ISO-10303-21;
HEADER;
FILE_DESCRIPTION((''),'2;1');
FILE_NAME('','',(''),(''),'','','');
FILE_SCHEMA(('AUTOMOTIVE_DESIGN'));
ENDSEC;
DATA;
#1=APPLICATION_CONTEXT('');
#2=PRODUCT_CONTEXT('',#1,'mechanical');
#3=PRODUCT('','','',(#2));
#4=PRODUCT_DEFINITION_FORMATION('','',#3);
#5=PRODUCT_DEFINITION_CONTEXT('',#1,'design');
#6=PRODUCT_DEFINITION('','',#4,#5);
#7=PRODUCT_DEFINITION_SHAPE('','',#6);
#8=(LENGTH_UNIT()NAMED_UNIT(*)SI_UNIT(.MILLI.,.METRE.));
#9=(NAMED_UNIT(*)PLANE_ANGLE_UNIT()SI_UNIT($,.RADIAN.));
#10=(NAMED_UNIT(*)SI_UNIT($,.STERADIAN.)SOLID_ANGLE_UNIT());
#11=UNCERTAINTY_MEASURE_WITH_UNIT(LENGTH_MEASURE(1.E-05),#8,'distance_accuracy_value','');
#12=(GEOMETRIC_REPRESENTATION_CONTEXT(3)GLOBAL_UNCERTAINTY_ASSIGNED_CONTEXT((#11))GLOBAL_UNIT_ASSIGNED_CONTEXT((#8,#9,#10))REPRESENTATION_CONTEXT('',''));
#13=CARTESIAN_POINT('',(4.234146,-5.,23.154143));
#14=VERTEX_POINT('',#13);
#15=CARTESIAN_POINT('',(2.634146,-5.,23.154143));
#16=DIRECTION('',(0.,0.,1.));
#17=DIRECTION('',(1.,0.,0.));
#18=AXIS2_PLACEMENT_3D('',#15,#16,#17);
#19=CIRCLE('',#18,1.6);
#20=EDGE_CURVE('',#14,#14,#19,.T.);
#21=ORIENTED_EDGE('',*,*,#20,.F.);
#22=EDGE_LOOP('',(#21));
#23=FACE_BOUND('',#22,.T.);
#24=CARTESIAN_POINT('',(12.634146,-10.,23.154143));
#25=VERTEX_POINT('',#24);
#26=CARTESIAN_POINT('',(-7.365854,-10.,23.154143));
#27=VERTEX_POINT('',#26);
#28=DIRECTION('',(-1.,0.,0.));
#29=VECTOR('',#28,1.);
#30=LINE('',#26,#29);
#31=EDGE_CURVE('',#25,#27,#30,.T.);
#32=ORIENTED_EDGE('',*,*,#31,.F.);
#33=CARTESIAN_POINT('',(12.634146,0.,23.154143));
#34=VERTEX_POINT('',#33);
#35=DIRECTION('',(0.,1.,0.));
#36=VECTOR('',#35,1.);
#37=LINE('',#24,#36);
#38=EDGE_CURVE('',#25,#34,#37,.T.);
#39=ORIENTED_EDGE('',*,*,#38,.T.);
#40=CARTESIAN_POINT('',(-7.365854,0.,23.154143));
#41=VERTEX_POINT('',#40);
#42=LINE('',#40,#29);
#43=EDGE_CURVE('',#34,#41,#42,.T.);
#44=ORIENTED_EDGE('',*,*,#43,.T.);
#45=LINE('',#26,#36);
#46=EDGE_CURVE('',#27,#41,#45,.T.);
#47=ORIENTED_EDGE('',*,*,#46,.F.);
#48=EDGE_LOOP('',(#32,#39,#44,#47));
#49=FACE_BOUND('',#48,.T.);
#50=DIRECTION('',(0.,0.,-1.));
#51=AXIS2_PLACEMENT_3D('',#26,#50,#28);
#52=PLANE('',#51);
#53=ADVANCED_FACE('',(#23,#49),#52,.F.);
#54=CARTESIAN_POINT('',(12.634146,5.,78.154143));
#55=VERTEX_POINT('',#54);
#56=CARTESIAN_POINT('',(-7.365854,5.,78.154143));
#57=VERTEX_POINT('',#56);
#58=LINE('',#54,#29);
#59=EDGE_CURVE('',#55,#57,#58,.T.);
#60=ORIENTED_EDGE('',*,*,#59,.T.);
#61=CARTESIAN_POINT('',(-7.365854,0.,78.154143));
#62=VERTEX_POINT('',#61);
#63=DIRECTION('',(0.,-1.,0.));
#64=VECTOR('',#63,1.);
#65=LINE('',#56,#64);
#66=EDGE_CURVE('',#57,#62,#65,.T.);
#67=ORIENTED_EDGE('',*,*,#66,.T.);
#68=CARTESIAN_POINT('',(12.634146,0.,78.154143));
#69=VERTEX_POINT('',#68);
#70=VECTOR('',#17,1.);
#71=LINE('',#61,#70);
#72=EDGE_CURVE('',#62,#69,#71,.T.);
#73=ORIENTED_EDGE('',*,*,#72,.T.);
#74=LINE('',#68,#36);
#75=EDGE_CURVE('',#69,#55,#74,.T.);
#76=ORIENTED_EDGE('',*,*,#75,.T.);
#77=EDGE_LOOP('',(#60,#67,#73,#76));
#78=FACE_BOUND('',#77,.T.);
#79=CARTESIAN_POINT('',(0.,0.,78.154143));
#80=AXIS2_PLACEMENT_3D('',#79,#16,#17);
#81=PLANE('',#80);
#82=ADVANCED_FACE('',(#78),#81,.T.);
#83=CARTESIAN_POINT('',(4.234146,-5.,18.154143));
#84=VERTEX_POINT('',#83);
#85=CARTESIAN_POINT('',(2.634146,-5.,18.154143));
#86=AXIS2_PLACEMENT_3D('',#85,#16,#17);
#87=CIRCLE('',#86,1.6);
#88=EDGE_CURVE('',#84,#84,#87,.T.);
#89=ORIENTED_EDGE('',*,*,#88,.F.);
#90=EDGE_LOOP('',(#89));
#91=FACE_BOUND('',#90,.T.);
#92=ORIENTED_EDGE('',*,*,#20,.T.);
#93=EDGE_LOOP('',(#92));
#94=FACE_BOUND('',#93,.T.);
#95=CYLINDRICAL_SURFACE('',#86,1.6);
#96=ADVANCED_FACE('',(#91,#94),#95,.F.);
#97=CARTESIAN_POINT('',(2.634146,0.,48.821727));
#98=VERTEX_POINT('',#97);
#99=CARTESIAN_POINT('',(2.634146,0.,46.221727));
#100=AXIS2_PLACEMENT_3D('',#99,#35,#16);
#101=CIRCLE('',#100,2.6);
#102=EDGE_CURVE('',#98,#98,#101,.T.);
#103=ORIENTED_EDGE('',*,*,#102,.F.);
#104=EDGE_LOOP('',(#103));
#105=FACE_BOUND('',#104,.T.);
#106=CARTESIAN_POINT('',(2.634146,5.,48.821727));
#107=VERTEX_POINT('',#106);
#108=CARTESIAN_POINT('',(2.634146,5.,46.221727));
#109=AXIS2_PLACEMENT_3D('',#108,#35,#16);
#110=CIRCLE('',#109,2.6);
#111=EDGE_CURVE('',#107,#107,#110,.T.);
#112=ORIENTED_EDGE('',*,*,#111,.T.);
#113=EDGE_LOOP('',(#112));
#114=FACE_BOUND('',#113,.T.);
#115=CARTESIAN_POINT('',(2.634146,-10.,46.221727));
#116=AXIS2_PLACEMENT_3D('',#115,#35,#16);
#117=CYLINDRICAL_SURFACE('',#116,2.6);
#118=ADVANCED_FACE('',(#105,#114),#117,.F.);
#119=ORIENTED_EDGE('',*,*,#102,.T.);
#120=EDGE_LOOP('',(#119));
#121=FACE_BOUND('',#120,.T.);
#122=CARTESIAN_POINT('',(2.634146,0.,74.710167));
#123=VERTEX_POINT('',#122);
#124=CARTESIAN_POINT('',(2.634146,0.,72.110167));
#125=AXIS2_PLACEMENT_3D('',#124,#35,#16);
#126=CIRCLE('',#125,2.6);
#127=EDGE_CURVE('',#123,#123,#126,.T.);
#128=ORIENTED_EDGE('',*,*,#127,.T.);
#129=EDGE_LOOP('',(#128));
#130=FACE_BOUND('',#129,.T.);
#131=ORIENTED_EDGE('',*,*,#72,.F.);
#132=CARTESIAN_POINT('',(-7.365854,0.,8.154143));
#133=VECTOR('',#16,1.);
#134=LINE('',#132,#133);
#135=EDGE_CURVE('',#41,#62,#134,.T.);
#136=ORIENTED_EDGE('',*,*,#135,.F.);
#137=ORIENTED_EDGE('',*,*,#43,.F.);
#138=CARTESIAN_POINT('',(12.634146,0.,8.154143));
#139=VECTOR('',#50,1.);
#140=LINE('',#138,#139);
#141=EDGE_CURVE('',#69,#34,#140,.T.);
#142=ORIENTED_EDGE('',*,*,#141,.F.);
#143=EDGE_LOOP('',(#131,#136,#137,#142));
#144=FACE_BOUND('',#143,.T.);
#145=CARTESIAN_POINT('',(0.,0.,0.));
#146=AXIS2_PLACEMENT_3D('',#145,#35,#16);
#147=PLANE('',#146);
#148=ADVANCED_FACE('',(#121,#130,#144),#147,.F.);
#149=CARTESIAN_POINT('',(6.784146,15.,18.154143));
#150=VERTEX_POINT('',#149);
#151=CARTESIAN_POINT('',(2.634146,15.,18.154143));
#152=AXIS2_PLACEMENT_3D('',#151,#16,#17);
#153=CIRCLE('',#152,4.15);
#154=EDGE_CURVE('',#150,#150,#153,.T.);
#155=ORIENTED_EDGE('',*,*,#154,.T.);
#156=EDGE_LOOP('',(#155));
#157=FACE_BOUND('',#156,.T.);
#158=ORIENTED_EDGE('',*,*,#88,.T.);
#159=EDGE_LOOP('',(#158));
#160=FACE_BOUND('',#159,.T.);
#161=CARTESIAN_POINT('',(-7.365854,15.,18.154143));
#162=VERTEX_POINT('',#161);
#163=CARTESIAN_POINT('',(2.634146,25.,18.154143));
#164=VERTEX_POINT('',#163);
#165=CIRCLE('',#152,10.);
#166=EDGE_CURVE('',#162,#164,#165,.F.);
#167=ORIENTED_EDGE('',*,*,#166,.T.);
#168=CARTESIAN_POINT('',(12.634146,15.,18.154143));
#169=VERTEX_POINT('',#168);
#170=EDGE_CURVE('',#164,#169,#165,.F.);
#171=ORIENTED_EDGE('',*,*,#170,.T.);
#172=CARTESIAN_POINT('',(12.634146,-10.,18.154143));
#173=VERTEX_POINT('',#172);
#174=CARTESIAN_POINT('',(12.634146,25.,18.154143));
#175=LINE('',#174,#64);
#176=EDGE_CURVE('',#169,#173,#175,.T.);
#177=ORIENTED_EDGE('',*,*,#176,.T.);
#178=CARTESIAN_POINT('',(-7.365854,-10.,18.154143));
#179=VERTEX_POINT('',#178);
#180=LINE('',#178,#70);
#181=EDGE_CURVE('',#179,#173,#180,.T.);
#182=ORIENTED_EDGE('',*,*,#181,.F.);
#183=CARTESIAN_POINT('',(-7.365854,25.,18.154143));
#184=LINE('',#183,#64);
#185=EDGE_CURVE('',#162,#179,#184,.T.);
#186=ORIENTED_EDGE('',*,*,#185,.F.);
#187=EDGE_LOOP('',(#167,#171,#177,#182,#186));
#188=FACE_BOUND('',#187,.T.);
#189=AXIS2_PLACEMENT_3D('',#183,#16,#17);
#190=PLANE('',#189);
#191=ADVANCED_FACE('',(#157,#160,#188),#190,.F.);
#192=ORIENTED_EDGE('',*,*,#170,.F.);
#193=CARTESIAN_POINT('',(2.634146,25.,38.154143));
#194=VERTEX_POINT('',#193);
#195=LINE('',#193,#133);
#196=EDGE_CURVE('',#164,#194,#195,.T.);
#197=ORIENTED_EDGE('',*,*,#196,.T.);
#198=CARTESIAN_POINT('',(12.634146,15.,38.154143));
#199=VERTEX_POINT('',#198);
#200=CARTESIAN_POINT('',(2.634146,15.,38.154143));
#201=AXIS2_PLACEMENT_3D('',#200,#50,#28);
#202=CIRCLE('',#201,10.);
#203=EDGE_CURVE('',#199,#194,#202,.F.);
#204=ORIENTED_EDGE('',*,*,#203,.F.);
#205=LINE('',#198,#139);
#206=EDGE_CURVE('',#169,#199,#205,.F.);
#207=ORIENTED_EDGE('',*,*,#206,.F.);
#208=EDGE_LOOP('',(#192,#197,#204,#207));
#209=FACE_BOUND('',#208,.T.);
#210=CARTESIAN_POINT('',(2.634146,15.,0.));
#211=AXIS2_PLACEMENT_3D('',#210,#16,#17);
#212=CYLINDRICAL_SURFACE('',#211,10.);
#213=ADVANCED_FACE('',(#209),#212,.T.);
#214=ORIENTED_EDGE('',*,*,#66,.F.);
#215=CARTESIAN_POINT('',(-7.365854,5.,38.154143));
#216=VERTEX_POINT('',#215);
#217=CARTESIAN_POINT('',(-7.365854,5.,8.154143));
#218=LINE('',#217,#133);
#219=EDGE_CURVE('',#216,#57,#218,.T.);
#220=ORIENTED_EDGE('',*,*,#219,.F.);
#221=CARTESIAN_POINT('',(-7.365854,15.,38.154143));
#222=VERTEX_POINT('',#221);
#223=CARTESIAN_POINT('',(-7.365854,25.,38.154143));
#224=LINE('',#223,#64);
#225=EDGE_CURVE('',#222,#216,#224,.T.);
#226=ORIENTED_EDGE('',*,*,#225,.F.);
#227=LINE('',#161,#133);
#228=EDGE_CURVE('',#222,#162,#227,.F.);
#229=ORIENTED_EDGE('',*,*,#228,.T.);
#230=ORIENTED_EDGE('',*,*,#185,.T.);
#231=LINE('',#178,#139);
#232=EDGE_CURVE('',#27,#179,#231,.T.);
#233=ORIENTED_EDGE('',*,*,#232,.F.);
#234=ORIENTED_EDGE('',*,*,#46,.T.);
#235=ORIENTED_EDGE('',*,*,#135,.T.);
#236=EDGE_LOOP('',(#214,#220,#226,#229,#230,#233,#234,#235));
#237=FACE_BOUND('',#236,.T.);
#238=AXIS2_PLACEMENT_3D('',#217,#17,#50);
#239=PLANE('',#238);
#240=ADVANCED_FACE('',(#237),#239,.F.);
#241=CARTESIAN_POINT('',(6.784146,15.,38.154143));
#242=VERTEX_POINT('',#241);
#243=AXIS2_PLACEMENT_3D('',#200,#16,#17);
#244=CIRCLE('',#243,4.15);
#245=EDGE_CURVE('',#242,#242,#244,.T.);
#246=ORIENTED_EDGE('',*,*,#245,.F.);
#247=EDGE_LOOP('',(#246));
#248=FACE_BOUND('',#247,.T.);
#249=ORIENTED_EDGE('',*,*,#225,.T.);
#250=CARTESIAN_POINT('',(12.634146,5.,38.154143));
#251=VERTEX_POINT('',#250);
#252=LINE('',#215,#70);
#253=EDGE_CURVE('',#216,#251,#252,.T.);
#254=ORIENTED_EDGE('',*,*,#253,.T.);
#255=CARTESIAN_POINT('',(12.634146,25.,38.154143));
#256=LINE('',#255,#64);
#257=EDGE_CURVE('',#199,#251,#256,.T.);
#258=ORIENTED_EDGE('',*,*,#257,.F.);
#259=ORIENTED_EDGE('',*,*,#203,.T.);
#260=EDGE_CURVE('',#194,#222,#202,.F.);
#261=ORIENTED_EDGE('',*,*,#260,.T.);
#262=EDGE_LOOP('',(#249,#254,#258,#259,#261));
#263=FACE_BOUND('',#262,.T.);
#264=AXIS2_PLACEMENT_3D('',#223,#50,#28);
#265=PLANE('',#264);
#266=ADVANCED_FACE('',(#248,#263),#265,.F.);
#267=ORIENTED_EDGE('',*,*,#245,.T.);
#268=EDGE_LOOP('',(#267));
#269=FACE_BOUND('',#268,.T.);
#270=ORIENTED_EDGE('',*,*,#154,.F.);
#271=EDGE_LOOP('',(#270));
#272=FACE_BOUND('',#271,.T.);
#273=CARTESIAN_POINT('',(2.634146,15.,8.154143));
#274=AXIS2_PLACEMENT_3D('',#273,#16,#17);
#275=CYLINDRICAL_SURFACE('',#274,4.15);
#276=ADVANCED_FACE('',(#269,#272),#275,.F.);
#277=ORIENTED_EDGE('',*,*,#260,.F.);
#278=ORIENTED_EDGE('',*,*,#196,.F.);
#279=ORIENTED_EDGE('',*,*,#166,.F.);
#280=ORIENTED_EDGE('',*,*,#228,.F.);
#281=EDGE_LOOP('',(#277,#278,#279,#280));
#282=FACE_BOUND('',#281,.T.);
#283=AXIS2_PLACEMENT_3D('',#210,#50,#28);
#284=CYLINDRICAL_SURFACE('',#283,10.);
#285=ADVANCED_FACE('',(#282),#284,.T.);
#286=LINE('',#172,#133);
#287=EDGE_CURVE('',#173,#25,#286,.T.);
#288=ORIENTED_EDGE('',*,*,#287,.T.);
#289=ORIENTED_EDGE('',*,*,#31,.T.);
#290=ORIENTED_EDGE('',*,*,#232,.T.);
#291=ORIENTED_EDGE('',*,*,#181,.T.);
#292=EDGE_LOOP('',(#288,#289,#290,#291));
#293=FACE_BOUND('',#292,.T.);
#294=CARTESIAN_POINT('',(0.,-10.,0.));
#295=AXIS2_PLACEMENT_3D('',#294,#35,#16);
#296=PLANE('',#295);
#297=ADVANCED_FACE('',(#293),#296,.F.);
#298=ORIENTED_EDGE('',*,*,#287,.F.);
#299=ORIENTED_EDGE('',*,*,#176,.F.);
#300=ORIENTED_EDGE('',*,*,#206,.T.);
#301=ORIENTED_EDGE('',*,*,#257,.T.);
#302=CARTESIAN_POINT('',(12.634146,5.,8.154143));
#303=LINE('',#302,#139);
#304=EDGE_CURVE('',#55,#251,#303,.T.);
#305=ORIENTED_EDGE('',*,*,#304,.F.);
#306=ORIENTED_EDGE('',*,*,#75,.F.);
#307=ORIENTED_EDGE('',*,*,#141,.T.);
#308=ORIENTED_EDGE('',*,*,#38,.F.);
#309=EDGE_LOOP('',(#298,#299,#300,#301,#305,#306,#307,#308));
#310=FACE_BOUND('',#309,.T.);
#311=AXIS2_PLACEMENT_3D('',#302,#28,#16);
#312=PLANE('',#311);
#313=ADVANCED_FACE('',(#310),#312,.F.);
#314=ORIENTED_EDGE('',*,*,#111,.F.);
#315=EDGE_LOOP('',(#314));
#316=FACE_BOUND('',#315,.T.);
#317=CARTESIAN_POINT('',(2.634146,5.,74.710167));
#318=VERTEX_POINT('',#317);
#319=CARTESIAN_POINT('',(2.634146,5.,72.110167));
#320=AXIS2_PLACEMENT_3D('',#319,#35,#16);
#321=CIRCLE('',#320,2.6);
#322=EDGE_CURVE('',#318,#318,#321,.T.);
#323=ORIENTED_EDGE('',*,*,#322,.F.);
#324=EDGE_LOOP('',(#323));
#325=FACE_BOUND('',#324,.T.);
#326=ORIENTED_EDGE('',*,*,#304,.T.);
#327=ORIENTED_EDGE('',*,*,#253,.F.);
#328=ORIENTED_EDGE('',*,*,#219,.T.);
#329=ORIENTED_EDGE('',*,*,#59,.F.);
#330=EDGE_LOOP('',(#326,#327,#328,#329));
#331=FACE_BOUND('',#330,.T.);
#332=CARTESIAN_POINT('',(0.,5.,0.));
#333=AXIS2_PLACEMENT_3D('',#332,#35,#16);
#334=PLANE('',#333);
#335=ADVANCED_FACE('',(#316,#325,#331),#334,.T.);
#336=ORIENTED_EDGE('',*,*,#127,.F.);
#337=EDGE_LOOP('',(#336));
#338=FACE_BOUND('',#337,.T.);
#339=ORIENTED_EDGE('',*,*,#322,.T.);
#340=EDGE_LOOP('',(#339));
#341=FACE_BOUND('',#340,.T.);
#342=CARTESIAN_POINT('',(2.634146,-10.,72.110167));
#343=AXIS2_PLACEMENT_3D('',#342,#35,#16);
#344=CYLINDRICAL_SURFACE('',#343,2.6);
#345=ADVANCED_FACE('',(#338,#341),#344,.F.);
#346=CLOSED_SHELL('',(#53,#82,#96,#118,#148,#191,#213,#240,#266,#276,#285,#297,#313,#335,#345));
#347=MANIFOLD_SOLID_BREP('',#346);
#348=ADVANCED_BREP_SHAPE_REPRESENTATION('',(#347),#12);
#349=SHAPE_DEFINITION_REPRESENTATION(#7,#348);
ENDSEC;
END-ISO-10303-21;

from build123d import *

# Parameters (mm, degrees)
SKETCH_1_W          = 20
SKETCH_1_H          = 40
EXTRUDE_1_DEPTH     = 5
SKETCH_2_W          = 20
SKETCH_2_H          = 20
EXTRUDE_2_DEPTH     = 20
SKETCH_3_R          = 4.15
CUT_EXTRUDE_1_DEPTH = 42.044142746
FILLET_1_R          = 10
SKETCH_6_W          = 20
SKETCH_6_H          = 25.791536141
CUT_EXTRUDE_3_DEPTH = 54.65112416
SKETCH_7_W          = 20
SKETCH_7_H          = 5
EXTRUDE_5_DEPTH     = 10
SKETCH_8_W          = 20
SKETCH_8_H          = 5
EXTRUDE_6_DEPTH     = 10
SKETCH_10_R         = 1.6
CUT_EXTRUDE_5_DEPTH = 45.828803841
SKETCH_11_W         = 20
SKETCH_11_H         = 5
EXTRUDE_7_DEPTH     = 20
SKETCH_12_R         = 2.6
CUT_EXTRUDE_7_DEPTH = 82.655934826


with BuildPart() as part:
    # 草图1 → 凸台-拉伸1 (new body)
    with BuildSketch(Plane(origin=(0, 0, 0), x_dir=(1, 0, 0), z_dir=(0, 1, 0))):
        with Locations((2.634146341, -28.154142811)):
            Rectangle(SKETCH_1_W, SKETCH_1_H)
    extrude(amount=EXTRUDE_1_DEPTH)

    # 草图2 → 凸台-拉伸2 (add)
    with BuildSketch(Plane(origin=(0, 5, 0), x_dir=(1, 0, 0), z_dir=(0, 1, 0))):
        with Locations((2.634146341, -28.154142811)):
            Rectangle(SKETCH_2_W, SKETCH_2_H)
    extrude(amount=EXTRUDE_2_DEPTH)

    # 草图3 → 切除-拉伸1 (cut, through all)
    with BuildSketch(Plane.XY.offset(38.154142811)):
        with Locations((2.634146341, 15)):
            Circle(SKETCH_3_R)
    extrude(amount=-CUT_EXTRUDE_1_DEPTH, mode=Mode.SUBTRACT)

    # 圆角1
    fillet_1_edges = [part.edges().sort_by_distance(p)[0] for p in [
        (12.634146341, 25, 28.154142811),
        (-7.365853659, 25, 28.154142811),
    ]]
    fillet(fillet_1_edges, radius=FILLET_1_R - 0.0001)  # a hair under: the kernel refuses the full size

    # 草图6 → 切除-拉伸3 (cut, through all)
    with BuildSketch(Plane(origin=(0, 5, 0), x_dir=(1, 0, 0), z_dir=(0, 1, 0))):
        with Locations((2.634146341, -5.25837474)):
            Rectangle(SKETCH_6_W, SKETCH_6_H)
    extrude(amount=-CUT_EXTRUDE_3_DEPTH, mode=Mode.SUBTRACT)

    # 草图7 → 凸台-拉伸5 (add)
    with BuildSketch(Plane.XZ):
        with Locations((2.634146341, 20.654142811)):
            Rectangle(SKETCH_7_W, SKETCH_7_H)
    extrude(amount=EXTRUDE_5_DEPTH)

    # 草图8 → 凸台-拉伸6 (add)
    with BuildSketch(Plane.XY.offset(48.154142811)):
        with Locations((2.634146341, 2.5)):
            Rectangle(SKETCH_8_W, SKETCH_8_H)
    extrude(amount=EXTRUDE_6_DEPTH)

    # 草图10 → 切除-拉伸5 (cut, through all)
    with BuildSketch(Plane.XY.offset(23.154142811)):
        with Locations((2.634146341, -5)):
            Circle(SKETCH_10_R)
    extrude(amount=-CUT_EXTRUDE_5_DEPTH, mode=Mode.SUBTRACT)

    # 草图11 → 凸台-拉伸7 (add)
    with BuildSketch(Plane.XY.offset(58.154142811)):
        with Locations((2.634146341, 2.5)):
            Rectangle(SKETCH_11_W, SKETCH_11_H)
    extrude(amount=EXTRUDE_7_DEPTH)

    # 草图12 → 切除-拉伸7 (cut, through all)
    with BuildSketch(Plane(origin=(0, 5, 0), x_dir=(1, 0, 0), z_dir=(0, 1, 0))):
        with Locations(Location((2.634146341, -46.221727325, 0), (0, 0, 270))):
            Circle(SKETCH_12_R)
        with Locations(Location((2.634146341, -72.110167443, 0), (0, 0, 270))):
            Circle(SKETCH_12_R)
    extrude(amount=-CUT_EXTRUDE_7_DEPTH, mode=Mode.SUBTRACT)


solid = part.part
